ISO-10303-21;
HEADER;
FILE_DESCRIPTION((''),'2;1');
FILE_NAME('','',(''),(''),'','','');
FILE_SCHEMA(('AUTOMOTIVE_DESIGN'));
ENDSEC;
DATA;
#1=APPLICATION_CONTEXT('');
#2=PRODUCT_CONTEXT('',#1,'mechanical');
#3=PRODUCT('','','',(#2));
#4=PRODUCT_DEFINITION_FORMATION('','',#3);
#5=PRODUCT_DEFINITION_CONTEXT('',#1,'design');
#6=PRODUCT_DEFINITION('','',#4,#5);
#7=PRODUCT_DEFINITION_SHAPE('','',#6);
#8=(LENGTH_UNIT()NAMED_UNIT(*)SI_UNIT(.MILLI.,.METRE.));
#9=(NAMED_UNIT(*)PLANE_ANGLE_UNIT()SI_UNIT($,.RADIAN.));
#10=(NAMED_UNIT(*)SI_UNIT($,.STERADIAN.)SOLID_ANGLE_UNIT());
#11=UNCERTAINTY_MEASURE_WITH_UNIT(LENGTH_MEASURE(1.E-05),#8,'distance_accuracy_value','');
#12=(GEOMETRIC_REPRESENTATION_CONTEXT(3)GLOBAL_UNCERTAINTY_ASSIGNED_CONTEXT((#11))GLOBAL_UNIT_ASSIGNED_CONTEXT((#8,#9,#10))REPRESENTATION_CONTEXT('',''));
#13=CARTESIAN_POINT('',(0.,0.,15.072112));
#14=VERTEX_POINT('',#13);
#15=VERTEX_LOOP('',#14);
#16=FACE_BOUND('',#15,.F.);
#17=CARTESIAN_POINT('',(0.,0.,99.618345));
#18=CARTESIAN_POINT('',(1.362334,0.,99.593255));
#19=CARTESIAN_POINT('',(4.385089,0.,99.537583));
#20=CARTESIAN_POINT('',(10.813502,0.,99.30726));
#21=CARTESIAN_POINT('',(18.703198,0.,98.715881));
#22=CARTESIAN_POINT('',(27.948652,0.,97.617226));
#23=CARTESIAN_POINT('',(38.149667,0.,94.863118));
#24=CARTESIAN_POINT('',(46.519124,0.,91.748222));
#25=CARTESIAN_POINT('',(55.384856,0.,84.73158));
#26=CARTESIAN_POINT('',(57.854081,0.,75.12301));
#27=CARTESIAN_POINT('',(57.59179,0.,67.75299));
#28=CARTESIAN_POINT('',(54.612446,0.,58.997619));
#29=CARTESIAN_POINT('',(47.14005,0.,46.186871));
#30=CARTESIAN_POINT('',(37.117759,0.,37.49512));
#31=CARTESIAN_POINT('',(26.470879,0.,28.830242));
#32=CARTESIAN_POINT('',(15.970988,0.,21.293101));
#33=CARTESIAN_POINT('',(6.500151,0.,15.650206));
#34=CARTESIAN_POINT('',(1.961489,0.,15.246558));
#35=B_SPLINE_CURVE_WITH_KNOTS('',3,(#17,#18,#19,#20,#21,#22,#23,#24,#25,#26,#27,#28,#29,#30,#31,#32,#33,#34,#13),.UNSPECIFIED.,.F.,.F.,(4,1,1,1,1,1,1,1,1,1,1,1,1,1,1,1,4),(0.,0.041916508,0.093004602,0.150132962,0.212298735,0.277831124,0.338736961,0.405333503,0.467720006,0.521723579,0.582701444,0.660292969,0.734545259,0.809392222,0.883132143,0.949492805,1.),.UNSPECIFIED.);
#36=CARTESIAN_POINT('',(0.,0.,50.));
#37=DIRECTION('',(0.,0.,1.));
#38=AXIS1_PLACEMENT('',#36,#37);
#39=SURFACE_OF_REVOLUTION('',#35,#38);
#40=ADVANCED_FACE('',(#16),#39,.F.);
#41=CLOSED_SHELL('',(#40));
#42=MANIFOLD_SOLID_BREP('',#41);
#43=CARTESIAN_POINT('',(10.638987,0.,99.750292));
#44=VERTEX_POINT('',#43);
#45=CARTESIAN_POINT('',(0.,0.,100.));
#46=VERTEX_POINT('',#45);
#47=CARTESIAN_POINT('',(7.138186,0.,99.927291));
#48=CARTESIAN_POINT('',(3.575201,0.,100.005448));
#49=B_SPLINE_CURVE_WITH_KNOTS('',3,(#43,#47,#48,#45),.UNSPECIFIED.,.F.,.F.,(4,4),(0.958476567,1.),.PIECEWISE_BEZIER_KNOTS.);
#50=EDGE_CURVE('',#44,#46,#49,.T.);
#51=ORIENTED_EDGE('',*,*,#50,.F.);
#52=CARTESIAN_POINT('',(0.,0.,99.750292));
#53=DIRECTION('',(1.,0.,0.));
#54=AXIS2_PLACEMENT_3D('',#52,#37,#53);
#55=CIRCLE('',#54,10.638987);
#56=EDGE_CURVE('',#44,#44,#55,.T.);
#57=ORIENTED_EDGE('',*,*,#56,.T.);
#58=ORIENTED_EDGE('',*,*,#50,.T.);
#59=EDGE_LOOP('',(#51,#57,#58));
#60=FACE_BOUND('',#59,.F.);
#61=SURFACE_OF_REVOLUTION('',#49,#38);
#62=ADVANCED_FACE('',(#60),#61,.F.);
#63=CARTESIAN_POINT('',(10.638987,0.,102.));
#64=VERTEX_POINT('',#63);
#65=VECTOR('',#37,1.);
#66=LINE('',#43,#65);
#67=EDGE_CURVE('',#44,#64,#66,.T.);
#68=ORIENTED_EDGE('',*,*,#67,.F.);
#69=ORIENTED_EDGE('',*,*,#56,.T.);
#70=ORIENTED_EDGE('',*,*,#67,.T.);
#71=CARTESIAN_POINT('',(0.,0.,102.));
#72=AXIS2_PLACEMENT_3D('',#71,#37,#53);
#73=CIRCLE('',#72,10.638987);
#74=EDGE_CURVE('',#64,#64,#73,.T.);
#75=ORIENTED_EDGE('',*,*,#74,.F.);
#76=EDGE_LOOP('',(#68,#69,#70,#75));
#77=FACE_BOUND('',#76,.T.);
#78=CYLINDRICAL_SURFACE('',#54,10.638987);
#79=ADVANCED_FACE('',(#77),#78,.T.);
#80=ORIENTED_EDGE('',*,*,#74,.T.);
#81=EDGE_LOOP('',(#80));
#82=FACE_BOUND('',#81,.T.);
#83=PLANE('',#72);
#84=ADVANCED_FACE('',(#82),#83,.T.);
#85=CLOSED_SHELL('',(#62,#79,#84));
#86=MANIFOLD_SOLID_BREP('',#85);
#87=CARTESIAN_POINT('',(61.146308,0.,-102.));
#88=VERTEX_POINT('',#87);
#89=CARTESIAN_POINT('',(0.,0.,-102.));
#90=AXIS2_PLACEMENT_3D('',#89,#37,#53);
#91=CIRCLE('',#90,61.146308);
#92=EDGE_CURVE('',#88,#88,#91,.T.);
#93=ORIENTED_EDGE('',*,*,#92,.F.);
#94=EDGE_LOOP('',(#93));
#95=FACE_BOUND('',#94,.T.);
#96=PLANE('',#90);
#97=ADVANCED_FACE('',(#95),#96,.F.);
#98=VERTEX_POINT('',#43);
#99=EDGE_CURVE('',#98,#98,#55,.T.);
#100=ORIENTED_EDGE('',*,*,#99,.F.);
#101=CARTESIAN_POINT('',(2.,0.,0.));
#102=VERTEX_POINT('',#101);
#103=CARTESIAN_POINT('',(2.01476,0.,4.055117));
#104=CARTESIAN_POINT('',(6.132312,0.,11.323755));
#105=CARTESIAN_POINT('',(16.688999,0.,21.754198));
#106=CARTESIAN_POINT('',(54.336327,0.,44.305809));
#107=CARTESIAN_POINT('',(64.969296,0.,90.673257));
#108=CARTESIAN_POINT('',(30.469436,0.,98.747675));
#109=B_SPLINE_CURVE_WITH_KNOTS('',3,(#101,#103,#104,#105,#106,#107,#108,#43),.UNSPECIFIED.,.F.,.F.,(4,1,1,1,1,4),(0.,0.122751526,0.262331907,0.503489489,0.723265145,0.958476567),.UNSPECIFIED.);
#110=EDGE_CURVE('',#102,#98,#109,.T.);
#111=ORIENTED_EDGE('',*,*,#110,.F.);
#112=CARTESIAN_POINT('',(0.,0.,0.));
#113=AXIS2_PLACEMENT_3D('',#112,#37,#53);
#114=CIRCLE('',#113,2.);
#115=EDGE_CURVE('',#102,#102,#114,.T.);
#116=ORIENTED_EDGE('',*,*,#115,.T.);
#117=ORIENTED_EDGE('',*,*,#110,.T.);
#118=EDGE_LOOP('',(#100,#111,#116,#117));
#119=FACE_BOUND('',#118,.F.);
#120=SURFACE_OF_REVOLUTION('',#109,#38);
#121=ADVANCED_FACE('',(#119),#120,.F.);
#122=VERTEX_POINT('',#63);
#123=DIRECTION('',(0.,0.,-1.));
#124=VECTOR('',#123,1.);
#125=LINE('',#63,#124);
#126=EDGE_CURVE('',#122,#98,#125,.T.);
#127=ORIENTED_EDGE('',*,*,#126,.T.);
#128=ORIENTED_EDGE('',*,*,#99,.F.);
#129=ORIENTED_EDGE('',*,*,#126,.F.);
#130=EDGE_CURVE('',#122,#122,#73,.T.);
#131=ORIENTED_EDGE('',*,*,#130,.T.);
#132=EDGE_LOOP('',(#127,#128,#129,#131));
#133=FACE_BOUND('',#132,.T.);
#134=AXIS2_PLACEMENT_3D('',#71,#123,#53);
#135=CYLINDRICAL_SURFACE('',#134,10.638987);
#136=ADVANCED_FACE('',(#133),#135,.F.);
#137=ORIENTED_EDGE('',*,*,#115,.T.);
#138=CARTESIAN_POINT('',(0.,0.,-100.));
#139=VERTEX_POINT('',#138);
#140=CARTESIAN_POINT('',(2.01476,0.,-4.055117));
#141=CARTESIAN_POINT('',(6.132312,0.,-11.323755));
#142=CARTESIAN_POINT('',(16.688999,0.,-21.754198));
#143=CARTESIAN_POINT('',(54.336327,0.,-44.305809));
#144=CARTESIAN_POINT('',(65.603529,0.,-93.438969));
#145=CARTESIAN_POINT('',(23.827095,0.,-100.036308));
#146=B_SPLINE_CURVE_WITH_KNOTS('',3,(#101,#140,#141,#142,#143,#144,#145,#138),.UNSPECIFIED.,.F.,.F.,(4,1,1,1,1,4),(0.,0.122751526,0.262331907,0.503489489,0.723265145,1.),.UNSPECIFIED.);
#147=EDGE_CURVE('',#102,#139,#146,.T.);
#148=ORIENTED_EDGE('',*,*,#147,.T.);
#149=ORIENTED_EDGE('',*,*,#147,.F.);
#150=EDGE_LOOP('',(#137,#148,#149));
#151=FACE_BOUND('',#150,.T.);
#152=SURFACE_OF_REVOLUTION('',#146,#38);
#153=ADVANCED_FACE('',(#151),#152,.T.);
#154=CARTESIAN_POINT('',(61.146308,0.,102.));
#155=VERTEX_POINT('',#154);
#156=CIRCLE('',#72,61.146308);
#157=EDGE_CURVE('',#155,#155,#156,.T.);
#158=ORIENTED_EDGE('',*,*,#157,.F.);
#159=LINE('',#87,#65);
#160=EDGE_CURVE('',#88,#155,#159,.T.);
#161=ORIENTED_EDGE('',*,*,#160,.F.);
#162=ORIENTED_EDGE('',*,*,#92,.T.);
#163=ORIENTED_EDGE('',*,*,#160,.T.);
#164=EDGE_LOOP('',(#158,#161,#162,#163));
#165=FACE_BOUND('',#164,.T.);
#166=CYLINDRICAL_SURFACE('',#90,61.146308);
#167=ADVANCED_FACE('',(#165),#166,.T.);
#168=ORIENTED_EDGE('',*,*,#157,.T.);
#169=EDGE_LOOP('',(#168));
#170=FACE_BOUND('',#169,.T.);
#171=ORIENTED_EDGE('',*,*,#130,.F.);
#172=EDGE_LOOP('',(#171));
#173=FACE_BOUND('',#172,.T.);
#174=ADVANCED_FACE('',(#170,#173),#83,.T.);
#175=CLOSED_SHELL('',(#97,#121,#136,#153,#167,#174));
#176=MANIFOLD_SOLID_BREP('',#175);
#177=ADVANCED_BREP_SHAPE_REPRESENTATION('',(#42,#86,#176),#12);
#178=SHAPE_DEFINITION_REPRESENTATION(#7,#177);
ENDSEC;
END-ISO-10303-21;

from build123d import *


with BuildPart() as f1:
    # F0 (on Front) → F1 (revolve)
    with BuildSketch(Plane.XZ):
        with BuildLine():
            add(Edge.make_bspline(
                [(2, 0), (2.0147597881, 4.0551168686), (6.1323122237, 11.3237550938), (16.688998986, 21.7541977077), (54.3363270254, 44.305808759), (64.9692962796, 90.6732568298), (30.4694363546, 98.7476745717), (10.6389869017, 99.7502924966)],
                knots=[0, 0, 0, 0, 0.1227515264, 0.2623319068, 0.5034894894, 0.723265145, 0.9584765665, 0.9584765665, 0.9584765665, 0.9584765665], degree=3))
            Line((2, 0), (61.1463077366, 0))
            Line((61.1463077366, 0), (61.1463077366, 102))
            Line((61.1463077366, 102), (10.6389869017, 102))
            Line((10.6389869017, 102), (10.6389869017, 99.7502924966))
        make_face()
        with BuildLine():
            Line((61.1463077366, 0), (2, 0))
            add(Edge.make_bspline(
                [(2, 0), (2.0147597881, -4.0551168686), (6.1323122237, -11.3237550938), (16.688998986, -21.7541977077), (54.3363270254, -44.305808759), (65.6035285267, -93.4389688412), (23.8270945847, -100.0363081694), (0, -100)],
                knots=[0, 0, 0, 0, 0.1227515264, 0.2623319068, 0.5034894894, 0.723265145, 1, 1, 1, 1], degree=3))
            Line((0, -100), (0, -102))
            Line((0, -102), (61.1463077366, -102))
            Line((61.1463077366, -102), (61.1463077366, 0))
        make_face()
    revolve(axis=Axis((0, 0, 50), (0, 0, 1)))


with BuildPart() as f2:
    # F0 (on Front) → F2 (revolve)
    with BuildSketch(Plane.XZ):
        with BuildLine():
            add(Edge.make_bspline(
                [(10.6389869017, 99.7502924966), (7.1381860311, 99.9272912939), (3.5752011705, 100.005447958), (0, 100)],
                knots=[0.9584765665, 0.9584765665, 0.9584765665, 0.9584765665, 1, 1, 1, 1], degree=3))
            Line((10.6389869017, 99.7502924966), (10.6389869017, 102))
            Line((10.6389869017, 102), (0, 102))
            Line((0, 102), (0, 100))
        make_face()
    revolve(axis=Axis((0, 0, 50), (0, 0, 1)))


with BuildPart() as f3:
    # F0 (on Front) → F3 (revolve)
    with BuildSketch(Plane.XZ):
        with BuildLine():
            Line((0, 99.618345499), (0, 15.0721119717))
            add(Edge.make_bspline(
                [(0, 99.618345499), (1.3623338784, 99.5932547672), (4.3850885304, 99.5375832996), (10.8135018916, 99.3072595025), (18.7031980542, 98.7158812691), (27.9486517628, 97.61722578), (38.1496670262, 94.8631175555), (46.5191243788, 91.7482221565), (55.3848555365, 84.7315803035), (57.8540814168, 75.1230097649), (57.5917895539, 67.7529895608), (54.6124455282, 58.9976189554), (47.1400496162, 46.1868707392), (37.1177594466, 37.4951198572), (26.4708786817, 28.8302422015), (15.9709875668, 21.2931010192), (6.5001510156, 15.6502063645), (1.9614894282, 15.2465580787), (0, 15.0721119717)],
                knots=[0, 0, 0, 0, 0.041916508, 0.0930046015, 0.1501329622, 0.2122987352, 0.277831124, 0.3387369607, 0.4053335032, 0.4677200062, 0.5217235792, 0.5827014437, 0.6602929687, 0.7345452588, 0.8093922215, 0.8831321428, 0.9494928049, 1, 1, 1, 1], degree=3))
        make_face()
    revolve(axis=Axis((0, 0, 50), (0, 0, 1)))


solid = Compound([f1.part, f2.part, f3.part])
